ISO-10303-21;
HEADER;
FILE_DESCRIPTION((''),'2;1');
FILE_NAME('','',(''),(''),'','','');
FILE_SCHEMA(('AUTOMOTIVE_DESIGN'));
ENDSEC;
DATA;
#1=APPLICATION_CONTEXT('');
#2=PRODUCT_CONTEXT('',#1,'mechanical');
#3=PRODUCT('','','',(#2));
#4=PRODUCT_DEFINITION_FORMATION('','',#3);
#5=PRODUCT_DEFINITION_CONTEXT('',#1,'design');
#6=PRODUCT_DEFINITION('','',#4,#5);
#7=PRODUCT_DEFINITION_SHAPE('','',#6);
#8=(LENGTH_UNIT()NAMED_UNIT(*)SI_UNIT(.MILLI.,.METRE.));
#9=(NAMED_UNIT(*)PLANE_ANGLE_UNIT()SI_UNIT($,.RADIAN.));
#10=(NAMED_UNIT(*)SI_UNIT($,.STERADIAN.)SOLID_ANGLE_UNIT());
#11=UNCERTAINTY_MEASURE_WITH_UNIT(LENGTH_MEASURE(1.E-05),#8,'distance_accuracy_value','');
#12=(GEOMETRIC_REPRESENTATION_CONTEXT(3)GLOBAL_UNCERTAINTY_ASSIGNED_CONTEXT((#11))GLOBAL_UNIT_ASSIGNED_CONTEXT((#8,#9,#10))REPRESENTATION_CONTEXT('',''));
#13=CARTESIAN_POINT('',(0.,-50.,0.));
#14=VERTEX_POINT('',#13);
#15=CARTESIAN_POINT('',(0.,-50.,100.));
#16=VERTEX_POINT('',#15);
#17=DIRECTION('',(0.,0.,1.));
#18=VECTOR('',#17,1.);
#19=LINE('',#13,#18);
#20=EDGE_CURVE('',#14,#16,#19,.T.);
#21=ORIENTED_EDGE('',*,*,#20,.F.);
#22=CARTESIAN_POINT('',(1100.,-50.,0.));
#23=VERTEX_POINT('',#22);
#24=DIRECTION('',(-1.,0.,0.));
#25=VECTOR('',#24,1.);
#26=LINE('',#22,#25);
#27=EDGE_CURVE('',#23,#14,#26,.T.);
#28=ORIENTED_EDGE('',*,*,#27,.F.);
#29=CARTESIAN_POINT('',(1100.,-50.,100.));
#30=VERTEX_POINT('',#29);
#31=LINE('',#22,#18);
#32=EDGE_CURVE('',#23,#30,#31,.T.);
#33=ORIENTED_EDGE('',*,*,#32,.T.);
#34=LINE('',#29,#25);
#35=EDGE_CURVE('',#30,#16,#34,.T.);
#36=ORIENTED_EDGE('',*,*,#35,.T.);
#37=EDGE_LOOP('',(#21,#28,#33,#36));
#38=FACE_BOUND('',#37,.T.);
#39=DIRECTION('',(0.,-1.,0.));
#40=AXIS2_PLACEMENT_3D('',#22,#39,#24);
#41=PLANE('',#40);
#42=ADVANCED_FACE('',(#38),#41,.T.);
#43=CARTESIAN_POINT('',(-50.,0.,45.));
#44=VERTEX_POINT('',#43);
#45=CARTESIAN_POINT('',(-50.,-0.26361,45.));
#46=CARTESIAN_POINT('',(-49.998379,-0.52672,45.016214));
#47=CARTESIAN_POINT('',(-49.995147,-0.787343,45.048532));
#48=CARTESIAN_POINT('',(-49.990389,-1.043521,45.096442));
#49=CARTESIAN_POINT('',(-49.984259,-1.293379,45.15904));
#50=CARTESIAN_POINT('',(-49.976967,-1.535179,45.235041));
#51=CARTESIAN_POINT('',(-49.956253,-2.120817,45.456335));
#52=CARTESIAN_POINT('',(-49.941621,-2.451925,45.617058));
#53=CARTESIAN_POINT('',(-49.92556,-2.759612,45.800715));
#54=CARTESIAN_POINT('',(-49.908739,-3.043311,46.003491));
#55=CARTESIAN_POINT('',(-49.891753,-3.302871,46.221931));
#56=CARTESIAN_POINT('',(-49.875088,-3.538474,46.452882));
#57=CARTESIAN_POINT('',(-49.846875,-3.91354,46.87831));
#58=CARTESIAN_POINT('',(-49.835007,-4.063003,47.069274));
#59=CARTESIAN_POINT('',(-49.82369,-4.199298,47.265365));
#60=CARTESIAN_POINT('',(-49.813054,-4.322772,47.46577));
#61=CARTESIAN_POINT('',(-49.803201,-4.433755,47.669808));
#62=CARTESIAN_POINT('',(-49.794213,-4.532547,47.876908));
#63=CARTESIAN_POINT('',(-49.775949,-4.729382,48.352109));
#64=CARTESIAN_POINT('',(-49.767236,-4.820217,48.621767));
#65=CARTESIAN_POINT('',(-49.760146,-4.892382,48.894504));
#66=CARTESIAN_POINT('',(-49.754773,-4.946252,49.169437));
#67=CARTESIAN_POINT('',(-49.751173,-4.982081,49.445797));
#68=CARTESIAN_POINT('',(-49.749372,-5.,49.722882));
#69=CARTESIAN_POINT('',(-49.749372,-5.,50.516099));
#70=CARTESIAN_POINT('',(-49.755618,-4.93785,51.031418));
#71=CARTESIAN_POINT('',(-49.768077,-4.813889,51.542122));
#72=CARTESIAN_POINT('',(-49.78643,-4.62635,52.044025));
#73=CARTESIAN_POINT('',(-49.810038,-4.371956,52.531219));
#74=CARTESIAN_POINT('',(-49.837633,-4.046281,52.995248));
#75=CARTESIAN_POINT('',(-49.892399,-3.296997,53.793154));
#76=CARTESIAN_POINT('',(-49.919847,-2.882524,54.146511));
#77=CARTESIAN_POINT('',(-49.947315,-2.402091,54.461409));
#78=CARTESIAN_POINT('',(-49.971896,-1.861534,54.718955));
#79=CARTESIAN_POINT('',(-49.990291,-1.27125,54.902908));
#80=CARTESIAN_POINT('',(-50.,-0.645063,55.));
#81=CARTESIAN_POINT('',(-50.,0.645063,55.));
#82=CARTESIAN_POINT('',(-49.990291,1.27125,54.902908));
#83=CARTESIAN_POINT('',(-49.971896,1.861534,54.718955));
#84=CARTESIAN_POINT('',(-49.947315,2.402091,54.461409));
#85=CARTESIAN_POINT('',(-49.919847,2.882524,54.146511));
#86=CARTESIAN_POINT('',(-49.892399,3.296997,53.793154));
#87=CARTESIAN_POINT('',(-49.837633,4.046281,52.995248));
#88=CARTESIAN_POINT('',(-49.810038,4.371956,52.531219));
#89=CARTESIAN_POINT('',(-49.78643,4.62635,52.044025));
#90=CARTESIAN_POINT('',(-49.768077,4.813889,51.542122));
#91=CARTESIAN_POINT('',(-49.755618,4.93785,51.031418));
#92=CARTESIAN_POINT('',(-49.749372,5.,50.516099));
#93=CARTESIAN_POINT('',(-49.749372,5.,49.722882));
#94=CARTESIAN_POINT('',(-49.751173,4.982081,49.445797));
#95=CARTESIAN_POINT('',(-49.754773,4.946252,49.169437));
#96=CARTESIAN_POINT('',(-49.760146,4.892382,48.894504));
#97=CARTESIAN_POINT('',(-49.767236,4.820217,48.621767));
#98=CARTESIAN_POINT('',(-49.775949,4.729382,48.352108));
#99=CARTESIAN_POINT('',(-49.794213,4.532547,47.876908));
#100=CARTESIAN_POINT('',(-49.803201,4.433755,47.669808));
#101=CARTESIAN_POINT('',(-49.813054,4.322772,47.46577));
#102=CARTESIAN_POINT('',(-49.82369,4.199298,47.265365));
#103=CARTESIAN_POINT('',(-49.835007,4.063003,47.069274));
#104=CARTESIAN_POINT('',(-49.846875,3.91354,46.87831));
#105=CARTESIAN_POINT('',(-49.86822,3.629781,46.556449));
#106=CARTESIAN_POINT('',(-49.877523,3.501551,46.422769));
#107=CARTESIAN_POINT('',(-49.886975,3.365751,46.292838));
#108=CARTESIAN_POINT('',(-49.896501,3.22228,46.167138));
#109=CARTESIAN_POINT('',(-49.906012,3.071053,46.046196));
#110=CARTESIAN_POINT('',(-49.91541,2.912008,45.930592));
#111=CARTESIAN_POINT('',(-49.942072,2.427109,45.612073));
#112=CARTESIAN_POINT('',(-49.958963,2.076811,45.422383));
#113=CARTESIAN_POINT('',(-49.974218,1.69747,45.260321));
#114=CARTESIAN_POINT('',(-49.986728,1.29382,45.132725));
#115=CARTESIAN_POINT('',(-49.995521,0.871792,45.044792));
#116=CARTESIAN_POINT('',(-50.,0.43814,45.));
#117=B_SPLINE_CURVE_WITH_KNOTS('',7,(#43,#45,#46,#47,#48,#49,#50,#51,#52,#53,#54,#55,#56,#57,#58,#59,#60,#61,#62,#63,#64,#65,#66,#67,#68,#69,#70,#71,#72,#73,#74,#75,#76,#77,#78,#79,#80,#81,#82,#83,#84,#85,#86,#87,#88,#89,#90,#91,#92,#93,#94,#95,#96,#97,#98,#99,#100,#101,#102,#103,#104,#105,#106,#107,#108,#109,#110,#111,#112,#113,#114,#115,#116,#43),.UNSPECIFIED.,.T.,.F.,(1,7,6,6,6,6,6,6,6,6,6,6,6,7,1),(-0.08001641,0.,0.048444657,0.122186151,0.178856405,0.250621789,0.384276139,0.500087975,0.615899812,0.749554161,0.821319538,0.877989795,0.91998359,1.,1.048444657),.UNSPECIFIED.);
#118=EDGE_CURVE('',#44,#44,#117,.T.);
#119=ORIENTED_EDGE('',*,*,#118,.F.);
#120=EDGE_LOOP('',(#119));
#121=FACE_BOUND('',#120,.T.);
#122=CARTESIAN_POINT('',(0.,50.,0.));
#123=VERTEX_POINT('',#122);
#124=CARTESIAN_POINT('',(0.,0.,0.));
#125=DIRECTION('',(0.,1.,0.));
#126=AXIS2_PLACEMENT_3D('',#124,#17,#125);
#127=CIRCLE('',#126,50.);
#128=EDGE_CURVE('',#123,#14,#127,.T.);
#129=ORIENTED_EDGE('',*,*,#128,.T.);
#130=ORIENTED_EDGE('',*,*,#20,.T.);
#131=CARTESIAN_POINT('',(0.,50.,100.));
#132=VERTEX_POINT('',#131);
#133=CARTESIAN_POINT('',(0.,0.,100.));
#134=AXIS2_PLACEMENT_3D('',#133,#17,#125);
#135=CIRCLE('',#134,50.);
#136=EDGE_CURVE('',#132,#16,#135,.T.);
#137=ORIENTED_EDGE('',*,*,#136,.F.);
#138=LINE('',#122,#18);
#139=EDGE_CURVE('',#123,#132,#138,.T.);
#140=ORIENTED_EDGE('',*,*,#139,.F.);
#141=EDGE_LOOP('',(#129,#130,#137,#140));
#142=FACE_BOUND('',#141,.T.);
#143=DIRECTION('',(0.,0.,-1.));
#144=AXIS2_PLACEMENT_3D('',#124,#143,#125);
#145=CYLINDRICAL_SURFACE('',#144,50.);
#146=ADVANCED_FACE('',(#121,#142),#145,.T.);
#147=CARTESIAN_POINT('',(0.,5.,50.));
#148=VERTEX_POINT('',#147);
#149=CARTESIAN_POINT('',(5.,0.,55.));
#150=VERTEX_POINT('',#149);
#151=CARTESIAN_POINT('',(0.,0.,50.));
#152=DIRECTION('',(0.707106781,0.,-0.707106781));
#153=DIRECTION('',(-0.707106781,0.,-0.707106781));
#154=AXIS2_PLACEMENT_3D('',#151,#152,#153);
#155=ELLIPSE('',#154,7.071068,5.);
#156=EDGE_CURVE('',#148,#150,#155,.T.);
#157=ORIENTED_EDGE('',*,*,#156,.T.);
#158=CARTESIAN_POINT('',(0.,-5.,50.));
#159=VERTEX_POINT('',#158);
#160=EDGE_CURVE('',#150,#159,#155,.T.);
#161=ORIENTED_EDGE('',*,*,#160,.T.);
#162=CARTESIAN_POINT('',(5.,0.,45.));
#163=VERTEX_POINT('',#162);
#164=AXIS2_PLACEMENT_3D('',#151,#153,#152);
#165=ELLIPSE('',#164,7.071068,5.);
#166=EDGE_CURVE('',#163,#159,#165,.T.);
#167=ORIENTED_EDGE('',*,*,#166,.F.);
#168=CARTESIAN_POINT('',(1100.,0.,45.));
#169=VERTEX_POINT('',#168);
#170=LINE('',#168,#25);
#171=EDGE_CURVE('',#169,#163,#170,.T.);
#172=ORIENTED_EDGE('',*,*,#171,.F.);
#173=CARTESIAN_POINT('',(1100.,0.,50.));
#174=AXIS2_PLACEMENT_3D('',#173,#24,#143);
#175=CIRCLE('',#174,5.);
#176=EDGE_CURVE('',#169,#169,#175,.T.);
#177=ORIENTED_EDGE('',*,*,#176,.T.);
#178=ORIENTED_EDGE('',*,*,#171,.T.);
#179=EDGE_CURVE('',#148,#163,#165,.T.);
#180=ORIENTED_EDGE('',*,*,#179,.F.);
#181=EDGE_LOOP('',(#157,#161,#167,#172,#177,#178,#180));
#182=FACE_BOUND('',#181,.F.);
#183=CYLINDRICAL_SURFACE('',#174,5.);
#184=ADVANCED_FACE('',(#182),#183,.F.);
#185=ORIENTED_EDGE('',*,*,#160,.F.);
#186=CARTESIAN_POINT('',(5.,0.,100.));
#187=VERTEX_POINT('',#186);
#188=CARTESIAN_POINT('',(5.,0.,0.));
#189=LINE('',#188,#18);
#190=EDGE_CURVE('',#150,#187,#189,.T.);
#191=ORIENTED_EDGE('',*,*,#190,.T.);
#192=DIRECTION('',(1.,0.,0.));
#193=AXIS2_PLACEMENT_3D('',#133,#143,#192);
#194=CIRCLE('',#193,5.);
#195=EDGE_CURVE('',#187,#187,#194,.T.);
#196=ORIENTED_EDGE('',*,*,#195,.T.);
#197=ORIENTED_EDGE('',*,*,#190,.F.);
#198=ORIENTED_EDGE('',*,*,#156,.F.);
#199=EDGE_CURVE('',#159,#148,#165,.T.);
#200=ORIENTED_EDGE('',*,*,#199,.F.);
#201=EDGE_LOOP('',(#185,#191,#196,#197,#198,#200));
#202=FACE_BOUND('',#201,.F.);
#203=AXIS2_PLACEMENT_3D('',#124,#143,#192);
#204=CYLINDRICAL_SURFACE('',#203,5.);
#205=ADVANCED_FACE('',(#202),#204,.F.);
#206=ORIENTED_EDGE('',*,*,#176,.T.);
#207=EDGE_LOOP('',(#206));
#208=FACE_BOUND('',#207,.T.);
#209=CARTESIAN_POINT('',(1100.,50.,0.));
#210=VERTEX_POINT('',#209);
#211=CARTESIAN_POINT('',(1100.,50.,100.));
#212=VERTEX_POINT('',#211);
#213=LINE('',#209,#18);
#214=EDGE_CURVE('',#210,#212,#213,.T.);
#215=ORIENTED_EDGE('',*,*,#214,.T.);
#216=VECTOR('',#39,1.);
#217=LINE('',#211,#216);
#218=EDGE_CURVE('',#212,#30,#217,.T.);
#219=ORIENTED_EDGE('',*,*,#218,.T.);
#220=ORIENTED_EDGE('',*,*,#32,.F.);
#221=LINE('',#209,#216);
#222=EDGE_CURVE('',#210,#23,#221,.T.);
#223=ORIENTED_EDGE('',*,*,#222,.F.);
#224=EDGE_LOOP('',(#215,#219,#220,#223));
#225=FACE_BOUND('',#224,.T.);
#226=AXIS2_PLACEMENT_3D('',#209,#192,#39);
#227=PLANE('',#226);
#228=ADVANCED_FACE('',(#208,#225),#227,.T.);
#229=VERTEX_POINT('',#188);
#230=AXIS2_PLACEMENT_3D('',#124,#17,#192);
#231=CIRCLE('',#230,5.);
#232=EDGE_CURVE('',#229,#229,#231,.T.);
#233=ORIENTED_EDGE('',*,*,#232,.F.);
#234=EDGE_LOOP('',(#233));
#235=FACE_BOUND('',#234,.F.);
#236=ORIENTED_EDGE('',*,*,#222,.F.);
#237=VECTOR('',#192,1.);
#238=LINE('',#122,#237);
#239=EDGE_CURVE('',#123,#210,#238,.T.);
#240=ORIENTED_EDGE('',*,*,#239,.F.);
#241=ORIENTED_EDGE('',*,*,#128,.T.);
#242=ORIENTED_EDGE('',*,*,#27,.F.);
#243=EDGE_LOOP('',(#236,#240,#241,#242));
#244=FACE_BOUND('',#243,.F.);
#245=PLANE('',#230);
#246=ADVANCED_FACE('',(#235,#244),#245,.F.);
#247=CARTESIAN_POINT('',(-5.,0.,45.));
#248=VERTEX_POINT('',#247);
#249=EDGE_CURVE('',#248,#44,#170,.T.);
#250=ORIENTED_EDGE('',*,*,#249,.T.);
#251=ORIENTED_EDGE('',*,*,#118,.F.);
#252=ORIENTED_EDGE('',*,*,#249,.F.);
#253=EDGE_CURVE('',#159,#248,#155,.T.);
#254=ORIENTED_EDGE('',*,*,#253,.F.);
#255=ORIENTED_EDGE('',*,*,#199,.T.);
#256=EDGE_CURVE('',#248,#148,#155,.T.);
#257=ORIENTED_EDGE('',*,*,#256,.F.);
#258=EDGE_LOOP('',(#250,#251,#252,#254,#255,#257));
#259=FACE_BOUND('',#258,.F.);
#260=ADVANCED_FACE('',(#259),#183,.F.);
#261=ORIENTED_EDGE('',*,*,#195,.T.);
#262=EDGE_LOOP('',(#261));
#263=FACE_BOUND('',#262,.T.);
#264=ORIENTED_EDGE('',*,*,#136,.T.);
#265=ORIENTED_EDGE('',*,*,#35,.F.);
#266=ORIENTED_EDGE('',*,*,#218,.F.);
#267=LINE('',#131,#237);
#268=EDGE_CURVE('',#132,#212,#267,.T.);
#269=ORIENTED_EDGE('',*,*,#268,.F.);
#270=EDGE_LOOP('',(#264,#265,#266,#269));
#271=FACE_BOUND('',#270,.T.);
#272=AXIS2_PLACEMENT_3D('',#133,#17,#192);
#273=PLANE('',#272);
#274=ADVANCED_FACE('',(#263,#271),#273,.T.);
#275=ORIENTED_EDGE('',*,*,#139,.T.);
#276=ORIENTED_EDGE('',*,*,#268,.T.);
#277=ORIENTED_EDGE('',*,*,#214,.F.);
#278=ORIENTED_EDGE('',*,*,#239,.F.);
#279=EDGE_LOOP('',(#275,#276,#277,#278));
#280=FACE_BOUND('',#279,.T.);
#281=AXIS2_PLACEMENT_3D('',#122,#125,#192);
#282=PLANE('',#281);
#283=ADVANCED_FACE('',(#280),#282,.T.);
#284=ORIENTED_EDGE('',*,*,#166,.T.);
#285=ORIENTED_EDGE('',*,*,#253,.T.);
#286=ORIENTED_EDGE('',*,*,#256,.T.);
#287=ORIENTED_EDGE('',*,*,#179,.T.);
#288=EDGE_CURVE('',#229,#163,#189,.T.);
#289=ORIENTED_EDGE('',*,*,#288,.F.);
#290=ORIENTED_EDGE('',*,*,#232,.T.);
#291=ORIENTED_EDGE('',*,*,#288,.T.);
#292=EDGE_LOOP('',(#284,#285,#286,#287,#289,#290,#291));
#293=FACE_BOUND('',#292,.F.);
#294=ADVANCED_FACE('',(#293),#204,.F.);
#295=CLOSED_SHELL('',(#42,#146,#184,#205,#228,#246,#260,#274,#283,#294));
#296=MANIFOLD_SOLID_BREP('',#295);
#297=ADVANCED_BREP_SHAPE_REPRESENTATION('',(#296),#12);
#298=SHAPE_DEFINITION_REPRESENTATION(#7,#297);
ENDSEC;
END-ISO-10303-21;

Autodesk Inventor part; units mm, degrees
ref_plane "YZ Plane" through (0, 0, 0) normal (1, 0, 0) x (0, 1, 0)
ref_plane "XZ Plane" through (0, 0, 0) normal (0, 1, 0) x (-1, 0, 0)
ref_plane "XY Plane" through (0, 0, 0) normal (0, 0, 1) x (1, 0, 0)
sketch "Sketch1" plane through (0, 0, 0) normal (0, 0, 1) x (1, 0, 0)
  circle A0 centre (0, 0) radius 5
  arc A1 (0, 50) -> (0, -50) centre (0, 0) ccw
  line L0 (0, 50) -> (1100, 50)
  line L1 (1100, 50) -> (1100, -50)
  line L2 (1100, -50) -> (0, -50)
  line L3 (0, -50) -> (0, 5)
  dimension "d0" = 10
  dimension "d1" = 100
  dimension "d2" = 1100
extrude "Extrusion1" add sketch "Sketch1" along normal blind 100
sketch "Sketch2" plane through (1100, -50, 0) normal (1, 0, 0) x (0, 0, -1)
  circle A0 centre (-50, 50) radius 5
  line L0 (0, 0) -> (0, 100) projected
  line L1 (0, 0) -> (-100, 0) projected
  line L2 (-100, 0) -> (-100, 100) projected
  point P0 (0, 50)
  point P1 (0, 50)
  dimension "d5" = 10
  dimension "d6" = 50
  dimension "d7" = 50
  dimension "d8" = 100
hole "Hole1" at (1100, 0, 50) direction (-1, 0, 0) diameter 10 end through all
equation "\"d6\" = 0.5 * d8"
equation "\"d7\" = d6"
properties part number "link3"
